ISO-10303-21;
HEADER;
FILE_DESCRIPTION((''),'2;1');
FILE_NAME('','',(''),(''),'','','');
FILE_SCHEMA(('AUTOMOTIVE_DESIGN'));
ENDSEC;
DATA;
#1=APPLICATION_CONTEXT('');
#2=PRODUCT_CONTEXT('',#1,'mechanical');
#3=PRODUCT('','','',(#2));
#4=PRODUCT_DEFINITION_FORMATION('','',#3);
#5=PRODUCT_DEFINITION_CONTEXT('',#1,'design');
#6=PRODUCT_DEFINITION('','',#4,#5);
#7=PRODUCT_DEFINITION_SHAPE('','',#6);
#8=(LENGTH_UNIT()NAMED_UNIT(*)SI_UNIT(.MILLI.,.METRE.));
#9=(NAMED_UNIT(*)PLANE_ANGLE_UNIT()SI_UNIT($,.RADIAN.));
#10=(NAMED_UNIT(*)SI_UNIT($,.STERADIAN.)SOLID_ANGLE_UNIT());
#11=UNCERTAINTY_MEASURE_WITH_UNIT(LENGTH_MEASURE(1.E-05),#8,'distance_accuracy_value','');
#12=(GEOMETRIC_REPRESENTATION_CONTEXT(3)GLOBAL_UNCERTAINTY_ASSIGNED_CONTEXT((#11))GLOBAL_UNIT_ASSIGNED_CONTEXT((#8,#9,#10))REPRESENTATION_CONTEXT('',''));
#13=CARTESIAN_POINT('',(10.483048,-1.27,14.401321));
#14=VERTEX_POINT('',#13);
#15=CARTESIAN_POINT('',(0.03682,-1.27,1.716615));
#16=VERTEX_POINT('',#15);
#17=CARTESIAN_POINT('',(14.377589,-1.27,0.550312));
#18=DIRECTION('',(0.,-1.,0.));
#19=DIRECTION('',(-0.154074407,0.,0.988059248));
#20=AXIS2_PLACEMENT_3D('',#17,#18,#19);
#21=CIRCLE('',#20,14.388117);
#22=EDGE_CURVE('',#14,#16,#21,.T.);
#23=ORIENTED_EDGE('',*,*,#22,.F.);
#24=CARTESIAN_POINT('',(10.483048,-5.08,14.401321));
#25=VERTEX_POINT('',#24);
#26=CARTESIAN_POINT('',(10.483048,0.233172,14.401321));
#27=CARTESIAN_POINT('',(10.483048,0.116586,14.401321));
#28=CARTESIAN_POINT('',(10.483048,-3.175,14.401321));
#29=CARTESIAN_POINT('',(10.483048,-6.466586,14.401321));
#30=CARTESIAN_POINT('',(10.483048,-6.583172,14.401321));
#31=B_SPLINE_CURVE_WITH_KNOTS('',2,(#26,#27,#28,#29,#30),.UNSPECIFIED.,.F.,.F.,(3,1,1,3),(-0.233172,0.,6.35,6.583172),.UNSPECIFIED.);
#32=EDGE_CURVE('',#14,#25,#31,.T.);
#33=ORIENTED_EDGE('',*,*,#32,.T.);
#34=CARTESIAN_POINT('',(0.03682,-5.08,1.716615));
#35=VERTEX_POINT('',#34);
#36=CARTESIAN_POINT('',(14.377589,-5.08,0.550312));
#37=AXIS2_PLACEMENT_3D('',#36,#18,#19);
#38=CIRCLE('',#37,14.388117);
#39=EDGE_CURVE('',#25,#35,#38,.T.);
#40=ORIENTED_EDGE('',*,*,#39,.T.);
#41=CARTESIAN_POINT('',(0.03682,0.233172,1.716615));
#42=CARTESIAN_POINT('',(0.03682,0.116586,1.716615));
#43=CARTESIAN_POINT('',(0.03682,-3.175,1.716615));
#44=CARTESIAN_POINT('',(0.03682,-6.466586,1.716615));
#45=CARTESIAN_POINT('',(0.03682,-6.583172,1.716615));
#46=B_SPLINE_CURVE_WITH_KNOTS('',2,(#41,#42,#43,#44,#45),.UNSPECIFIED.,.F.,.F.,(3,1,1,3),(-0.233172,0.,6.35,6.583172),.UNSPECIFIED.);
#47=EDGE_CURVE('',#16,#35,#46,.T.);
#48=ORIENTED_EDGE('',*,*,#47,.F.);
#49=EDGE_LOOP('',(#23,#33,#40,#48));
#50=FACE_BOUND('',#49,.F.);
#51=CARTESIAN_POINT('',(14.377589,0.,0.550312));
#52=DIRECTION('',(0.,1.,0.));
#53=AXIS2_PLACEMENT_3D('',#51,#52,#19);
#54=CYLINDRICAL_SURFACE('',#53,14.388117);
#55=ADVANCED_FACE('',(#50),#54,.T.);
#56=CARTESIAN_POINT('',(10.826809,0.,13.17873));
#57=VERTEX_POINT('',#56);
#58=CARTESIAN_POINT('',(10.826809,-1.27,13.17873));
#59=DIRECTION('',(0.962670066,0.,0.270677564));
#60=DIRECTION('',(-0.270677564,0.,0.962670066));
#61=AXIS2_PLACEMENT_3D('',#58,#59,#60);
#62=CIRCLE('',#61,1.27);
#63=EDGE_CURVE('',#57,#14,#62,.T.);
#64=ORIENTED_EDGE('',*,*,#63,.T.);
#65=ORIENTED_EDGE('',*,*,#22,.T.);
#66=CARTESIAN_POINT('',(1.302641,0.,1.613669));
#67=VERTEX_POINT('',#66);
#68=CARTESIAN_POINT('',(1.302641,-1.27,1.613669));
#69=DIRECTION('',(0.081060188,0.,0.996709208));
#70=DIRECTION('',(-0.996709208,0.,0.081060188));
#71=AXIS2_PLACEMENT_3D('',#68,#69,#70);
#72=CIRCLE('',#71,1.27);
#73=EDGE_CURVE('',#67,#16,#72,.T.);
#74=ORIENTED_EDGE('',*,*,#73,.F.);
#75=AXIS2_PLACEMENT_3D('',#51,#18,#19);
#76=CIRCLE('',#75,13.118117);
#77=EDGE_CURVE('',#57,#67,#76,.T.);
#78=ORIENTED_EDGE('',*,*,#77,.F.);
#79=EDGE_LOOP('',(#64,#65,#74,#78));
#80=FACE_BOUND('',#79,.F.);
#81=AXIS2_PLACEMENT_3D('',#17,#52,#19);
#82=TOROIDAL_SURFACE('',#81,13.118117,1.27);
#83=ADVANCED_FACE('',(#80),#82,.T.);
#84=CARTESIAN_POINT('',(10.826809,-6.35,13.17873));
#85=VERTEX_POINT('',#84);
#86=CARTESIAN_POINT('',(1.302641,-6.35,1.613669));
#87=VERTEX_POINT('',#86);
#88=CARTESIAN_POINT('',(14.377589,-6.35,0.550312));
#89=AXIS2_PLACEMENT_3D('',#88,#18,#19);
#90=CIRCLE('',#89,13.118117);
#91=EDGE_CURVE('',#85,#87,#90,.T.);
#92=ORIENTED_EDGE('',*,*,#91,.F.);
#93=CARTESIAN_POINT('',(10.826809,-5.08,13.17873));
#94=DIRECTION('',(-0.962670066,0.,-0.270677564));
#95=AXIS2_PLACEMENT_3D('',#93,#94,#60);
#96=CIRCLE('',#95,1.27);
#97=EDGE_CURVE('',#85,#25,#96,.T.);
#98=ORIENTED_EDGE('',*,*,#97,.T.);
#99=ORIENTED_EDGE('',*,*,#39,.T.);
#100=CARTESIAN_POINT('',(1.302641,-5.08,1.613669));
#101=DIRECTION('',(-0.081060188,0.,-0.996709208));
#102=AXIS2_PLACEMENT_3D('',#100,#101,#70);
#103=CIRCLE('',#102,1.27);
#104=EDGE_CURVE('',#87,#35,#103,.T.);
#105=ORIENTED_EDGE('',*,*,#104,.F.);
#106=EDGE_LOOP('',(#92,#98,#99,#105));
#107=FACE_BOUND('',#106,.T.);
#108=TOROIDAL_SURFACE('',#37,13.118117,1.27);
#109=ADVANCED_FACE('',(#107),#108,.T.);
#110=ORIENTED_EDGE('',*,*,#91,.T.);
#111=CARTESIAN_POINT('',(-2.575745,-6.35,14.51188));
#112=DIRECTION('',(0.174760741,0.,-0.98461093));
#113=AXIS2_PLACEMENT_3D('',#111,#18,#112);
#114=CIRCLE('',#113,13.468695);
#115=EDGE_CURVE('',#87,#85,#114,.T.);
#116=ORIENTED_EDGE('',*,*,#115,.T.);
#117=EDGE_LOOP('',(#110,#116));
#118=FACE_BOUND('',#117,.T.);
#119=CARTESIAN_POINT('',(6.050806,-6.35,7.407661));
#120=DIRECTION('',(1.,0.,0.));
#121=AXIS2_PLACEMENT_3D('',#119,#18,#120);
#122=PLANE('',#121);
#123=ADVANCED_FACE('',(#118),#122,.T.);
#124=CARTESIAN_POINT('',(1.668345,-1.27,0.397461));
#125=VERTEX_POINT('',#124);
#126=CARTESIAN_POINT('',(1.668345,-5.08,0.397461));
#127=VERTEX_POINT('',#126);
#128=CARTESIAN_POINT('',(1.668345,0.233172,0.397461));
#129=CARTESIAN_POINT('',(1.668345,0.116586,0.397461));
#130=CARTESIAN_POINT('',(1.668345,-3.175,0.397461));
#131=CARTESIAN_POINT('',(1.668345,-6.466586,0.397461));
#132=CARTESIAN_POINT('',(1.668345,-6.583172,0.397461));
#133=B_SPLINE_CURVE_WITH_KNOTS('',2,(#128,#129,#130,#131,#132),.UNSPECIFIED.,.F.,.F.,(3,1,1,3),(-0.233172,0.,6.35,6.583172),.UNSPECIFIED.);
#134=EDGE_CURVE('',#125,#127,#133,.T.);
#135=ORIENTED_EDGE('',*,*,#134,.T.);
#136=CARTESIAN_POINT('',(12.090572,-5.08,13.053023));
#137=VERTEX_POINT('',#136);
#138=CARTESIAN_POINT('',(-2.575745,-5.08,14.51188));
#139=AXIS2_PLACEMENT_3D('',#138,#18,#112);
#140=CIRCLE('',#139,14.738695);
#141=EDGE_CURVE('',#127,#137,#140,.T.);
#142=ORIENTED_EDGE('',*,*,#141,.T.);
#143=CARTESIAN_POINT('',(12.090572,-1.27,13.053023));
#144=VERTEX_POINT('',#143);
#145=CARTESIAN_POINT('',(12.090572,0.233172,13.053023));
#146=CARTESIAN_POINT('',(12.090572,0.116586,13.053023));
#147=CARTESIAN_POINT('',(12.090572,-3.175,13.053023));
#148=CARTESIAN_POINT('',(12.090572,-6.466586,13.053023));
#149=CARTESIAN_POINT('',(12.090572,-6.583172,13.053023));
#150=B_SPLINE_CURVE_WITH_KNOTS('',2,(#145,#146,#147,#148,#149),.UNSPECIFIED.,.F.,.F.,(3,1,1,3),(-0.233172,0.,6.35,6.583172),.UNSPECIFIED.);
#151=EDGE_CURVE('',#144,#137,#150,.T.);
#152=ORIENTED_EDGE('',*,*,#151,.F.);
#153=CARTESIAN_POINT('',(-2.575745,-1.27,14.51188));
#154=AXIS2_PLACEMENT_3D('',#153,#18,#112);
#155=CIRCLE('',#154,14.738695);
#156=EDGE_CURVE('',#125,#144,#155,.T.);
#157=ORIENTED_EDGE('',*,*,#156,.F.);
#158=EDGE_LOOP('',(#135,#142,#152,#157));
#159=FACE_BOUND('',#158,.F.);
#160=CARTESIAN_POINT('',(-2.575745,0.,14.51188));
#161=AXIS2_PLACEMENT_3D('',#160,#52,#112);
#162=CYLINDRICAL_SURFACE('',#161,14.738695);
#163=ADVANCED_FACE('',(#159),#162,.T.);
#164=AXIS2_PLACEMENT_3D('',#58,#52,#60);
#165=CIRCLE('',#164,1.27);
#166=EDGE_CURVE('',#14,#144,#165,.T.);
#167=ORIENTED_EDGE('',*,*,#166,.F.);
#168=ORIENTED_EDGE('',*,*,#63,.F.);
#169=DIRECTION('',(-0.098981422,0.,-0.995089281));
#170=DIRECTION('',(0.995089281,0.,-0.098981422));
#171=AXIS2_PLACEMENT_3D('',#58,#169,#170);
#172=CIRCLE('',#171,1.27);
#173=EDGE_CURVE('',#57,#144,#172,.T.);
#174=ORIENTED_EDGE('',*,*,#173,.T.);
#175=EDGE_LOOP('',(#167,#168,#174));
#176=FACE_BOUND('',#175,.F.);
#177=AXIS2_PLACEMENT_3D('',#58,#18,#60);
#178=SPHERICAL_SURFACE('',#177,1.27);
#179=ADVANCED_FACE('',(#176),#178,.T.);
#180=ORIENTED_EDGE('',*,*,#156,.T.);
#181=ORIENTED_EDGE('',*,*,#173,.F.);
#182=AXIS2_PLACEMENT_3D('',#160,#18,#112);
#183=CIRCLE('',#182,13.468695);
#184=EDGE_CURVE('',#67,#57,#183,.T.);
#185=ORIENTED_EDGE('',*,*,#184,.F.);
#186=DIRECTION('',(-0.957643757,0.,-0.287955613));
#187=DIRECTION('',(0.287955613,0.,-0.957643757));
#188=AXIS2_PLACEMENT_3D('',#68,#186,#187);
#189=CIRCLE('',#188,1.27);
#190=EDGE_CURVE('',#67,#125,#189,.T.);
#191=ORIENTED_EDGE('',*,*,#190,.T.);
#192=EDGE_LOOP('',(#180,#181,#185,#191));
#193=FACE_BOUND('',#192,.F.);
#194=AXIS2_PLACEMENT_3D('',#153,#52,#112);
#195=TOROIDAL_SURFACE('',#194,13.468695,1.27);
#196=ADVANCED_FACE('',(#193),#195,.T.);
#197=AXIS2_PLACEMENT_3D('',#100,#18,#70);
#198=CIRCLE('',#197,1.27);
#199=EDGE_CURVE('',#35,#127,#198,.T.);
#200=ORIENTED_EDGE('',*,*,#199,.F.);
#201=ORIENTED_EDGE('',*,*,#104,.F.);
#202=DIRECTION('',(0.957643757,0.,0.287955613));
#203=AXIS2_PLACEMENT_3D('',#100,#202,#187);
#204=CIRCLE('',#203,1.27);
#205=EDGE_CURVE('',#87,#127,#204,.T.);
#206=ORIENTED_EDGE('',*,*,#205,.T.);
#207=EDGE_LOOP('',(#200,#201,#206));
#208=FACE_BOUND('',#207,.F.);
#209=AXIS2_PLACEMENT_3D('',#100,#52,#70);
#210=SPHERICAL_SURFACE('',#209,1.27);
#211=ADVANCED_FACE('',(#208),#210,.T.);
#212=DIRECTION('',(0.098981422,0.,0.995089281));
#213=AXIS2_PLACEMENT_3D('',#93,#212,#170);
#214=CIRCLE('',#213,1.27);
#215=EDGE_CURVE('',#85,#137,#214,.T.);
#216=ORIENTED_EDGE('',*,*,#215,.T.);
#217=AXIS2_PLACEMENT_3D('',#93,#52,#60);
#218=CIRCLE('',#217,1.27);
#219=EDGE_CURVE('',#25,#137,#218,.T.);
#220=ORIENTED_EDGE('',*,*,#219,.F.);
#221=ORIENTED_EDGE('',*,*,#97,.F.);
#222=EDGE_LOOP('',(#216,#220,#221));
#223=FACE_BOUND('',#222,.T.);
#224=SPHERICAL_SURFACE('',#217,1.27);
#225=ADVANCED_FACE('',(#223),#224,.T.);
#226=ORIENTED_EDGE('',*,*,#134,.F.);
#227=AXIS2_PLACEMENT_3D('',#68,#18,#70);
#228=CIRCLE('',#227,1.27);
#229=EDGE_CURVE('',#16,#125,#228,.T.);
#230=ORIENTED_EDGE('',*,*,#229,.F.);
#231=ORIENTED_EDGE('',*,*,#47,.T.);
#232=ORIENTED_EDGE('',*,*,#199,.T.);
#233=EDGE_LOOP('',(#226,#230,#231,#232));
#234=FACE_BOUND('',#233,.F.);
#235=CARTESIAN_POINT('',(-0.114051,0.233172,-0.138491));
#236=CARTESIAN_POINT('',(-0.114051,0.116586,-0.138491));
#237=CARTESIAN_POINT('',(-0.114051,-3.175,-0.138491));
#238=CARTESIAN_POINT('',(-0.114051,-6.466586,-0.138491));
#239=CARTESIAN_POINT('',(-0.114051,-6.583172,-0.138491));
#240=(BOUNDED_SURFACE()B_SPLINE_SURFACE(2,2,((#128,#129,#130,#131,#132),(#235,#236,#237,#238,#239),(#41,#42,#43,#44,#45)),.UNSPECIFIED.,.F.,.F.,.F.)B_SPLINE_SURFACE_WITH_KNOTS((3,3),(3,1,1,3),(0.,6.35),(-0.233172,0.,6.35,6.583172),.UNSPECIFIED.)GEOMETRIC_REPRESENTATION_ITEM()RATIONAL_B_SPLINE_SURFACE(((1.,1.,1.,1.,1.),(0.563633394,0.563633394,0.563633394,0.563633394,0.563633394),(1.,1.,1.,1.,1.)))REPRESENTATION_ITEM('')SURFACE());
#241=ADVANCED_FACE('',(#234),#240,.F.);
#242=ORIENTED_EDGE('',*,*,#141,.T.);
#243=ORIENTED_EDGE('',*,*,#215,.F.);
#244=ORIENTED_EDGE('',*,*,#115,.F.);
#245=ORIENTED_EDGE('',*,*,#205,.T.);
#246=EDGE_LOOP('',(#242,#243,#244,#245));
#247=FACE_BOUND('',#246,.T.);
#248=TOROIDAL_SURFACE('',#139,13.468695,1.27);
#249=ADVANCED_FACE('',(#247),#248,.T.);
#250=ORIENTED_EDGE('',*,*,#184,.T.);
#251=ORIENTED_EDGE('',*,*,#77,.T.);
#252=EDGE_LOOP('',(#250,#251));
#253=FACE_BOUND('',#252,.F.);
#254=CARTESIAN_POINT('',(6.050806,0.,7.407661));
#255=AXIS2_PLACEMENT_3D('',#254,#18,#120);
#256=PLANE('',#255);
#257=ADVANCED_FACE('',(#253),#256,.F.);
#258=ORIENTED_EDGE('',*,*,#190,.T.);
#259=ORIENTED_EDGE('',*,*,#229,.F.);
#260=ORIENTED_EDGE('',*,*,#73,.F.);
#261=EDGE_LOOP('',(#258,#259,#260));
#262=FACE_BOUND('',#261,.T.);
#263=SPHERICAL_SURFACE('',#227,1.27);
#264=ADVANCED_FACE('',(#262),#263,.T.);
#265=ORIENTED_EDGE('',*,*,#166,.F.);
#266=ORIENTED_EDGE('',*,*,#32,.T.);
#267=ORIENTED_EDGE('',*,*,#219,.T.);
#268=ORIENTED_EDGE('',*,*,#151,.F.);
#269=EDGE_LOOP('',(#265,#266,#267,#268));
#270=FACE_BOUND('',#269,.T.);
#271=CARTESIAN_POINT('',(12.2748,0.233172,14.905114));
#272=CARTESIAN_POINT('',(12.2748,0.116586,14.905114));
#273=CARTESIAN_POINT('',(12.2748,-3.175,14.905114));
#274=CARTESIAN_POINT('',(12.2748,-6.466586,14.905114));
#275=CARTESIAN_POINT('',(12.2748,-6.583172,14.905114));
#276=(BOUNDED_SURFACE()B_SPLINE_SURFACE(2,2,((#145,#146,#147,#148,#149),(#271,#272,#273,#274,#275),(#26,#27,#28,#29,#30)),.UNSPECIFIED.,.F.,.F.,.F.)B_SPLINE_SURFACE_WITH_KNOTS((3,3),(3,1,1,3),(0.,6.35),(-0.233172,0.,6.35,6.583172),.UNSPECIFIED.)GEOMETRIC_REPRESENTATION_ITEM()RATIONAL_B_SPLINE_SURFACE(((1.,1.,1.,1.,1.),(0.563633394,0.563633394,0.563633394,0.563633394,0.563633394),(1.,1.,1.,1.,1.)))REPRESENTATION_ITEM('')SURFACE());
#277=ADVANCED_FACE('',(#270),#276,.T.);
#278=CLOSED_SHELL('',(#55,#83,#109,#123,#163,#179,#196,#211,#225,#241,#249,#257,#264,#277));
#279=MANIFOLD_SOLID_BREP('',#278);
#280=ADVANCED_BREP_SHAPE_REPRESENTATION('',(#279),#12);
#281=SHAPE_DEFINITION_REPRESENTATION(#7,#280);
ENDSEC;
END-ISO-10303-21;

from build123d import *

# Parameters (mm, degrees)
F1_DEPTH = 6.35
F3_R     = 1.27


# Not quite as in the source:
# - a feature of the source that left no trace in its solid (it failed there, or was rolled back) is left out


with BuildPart() as f1:
    # F0 (on Front) → F1 (new body)
    with BuildSketch(Plane.XZ):
        with BuildLine():
            ThreePointArc((0, 0), (8.8014992753, 5.1423850964), (12.1607482433, 14.766623266))
            ThreePointArc((12.1607482433, 14.766623266), (3.270966354, 9.6969414968), (0, 0))
        make_face()
    extrude(amount=F1_DEPTH)

    # F3
    f3_edges = [f1.edges().sort_by_distance(p)[0] for p in [
        (3.270966, 0, 9.696941),
        (8.801499, 0, 5.142385),
        (12.160748, -3.175, 14.766623),
        (0, -3.175, 0),
        (3.270966, -6.35, 9.696941),
        (8.801499, -6.35, 5.142385),
    ]]
    fillet(f3_edges, radius=F3_R)


solid = f1.part
